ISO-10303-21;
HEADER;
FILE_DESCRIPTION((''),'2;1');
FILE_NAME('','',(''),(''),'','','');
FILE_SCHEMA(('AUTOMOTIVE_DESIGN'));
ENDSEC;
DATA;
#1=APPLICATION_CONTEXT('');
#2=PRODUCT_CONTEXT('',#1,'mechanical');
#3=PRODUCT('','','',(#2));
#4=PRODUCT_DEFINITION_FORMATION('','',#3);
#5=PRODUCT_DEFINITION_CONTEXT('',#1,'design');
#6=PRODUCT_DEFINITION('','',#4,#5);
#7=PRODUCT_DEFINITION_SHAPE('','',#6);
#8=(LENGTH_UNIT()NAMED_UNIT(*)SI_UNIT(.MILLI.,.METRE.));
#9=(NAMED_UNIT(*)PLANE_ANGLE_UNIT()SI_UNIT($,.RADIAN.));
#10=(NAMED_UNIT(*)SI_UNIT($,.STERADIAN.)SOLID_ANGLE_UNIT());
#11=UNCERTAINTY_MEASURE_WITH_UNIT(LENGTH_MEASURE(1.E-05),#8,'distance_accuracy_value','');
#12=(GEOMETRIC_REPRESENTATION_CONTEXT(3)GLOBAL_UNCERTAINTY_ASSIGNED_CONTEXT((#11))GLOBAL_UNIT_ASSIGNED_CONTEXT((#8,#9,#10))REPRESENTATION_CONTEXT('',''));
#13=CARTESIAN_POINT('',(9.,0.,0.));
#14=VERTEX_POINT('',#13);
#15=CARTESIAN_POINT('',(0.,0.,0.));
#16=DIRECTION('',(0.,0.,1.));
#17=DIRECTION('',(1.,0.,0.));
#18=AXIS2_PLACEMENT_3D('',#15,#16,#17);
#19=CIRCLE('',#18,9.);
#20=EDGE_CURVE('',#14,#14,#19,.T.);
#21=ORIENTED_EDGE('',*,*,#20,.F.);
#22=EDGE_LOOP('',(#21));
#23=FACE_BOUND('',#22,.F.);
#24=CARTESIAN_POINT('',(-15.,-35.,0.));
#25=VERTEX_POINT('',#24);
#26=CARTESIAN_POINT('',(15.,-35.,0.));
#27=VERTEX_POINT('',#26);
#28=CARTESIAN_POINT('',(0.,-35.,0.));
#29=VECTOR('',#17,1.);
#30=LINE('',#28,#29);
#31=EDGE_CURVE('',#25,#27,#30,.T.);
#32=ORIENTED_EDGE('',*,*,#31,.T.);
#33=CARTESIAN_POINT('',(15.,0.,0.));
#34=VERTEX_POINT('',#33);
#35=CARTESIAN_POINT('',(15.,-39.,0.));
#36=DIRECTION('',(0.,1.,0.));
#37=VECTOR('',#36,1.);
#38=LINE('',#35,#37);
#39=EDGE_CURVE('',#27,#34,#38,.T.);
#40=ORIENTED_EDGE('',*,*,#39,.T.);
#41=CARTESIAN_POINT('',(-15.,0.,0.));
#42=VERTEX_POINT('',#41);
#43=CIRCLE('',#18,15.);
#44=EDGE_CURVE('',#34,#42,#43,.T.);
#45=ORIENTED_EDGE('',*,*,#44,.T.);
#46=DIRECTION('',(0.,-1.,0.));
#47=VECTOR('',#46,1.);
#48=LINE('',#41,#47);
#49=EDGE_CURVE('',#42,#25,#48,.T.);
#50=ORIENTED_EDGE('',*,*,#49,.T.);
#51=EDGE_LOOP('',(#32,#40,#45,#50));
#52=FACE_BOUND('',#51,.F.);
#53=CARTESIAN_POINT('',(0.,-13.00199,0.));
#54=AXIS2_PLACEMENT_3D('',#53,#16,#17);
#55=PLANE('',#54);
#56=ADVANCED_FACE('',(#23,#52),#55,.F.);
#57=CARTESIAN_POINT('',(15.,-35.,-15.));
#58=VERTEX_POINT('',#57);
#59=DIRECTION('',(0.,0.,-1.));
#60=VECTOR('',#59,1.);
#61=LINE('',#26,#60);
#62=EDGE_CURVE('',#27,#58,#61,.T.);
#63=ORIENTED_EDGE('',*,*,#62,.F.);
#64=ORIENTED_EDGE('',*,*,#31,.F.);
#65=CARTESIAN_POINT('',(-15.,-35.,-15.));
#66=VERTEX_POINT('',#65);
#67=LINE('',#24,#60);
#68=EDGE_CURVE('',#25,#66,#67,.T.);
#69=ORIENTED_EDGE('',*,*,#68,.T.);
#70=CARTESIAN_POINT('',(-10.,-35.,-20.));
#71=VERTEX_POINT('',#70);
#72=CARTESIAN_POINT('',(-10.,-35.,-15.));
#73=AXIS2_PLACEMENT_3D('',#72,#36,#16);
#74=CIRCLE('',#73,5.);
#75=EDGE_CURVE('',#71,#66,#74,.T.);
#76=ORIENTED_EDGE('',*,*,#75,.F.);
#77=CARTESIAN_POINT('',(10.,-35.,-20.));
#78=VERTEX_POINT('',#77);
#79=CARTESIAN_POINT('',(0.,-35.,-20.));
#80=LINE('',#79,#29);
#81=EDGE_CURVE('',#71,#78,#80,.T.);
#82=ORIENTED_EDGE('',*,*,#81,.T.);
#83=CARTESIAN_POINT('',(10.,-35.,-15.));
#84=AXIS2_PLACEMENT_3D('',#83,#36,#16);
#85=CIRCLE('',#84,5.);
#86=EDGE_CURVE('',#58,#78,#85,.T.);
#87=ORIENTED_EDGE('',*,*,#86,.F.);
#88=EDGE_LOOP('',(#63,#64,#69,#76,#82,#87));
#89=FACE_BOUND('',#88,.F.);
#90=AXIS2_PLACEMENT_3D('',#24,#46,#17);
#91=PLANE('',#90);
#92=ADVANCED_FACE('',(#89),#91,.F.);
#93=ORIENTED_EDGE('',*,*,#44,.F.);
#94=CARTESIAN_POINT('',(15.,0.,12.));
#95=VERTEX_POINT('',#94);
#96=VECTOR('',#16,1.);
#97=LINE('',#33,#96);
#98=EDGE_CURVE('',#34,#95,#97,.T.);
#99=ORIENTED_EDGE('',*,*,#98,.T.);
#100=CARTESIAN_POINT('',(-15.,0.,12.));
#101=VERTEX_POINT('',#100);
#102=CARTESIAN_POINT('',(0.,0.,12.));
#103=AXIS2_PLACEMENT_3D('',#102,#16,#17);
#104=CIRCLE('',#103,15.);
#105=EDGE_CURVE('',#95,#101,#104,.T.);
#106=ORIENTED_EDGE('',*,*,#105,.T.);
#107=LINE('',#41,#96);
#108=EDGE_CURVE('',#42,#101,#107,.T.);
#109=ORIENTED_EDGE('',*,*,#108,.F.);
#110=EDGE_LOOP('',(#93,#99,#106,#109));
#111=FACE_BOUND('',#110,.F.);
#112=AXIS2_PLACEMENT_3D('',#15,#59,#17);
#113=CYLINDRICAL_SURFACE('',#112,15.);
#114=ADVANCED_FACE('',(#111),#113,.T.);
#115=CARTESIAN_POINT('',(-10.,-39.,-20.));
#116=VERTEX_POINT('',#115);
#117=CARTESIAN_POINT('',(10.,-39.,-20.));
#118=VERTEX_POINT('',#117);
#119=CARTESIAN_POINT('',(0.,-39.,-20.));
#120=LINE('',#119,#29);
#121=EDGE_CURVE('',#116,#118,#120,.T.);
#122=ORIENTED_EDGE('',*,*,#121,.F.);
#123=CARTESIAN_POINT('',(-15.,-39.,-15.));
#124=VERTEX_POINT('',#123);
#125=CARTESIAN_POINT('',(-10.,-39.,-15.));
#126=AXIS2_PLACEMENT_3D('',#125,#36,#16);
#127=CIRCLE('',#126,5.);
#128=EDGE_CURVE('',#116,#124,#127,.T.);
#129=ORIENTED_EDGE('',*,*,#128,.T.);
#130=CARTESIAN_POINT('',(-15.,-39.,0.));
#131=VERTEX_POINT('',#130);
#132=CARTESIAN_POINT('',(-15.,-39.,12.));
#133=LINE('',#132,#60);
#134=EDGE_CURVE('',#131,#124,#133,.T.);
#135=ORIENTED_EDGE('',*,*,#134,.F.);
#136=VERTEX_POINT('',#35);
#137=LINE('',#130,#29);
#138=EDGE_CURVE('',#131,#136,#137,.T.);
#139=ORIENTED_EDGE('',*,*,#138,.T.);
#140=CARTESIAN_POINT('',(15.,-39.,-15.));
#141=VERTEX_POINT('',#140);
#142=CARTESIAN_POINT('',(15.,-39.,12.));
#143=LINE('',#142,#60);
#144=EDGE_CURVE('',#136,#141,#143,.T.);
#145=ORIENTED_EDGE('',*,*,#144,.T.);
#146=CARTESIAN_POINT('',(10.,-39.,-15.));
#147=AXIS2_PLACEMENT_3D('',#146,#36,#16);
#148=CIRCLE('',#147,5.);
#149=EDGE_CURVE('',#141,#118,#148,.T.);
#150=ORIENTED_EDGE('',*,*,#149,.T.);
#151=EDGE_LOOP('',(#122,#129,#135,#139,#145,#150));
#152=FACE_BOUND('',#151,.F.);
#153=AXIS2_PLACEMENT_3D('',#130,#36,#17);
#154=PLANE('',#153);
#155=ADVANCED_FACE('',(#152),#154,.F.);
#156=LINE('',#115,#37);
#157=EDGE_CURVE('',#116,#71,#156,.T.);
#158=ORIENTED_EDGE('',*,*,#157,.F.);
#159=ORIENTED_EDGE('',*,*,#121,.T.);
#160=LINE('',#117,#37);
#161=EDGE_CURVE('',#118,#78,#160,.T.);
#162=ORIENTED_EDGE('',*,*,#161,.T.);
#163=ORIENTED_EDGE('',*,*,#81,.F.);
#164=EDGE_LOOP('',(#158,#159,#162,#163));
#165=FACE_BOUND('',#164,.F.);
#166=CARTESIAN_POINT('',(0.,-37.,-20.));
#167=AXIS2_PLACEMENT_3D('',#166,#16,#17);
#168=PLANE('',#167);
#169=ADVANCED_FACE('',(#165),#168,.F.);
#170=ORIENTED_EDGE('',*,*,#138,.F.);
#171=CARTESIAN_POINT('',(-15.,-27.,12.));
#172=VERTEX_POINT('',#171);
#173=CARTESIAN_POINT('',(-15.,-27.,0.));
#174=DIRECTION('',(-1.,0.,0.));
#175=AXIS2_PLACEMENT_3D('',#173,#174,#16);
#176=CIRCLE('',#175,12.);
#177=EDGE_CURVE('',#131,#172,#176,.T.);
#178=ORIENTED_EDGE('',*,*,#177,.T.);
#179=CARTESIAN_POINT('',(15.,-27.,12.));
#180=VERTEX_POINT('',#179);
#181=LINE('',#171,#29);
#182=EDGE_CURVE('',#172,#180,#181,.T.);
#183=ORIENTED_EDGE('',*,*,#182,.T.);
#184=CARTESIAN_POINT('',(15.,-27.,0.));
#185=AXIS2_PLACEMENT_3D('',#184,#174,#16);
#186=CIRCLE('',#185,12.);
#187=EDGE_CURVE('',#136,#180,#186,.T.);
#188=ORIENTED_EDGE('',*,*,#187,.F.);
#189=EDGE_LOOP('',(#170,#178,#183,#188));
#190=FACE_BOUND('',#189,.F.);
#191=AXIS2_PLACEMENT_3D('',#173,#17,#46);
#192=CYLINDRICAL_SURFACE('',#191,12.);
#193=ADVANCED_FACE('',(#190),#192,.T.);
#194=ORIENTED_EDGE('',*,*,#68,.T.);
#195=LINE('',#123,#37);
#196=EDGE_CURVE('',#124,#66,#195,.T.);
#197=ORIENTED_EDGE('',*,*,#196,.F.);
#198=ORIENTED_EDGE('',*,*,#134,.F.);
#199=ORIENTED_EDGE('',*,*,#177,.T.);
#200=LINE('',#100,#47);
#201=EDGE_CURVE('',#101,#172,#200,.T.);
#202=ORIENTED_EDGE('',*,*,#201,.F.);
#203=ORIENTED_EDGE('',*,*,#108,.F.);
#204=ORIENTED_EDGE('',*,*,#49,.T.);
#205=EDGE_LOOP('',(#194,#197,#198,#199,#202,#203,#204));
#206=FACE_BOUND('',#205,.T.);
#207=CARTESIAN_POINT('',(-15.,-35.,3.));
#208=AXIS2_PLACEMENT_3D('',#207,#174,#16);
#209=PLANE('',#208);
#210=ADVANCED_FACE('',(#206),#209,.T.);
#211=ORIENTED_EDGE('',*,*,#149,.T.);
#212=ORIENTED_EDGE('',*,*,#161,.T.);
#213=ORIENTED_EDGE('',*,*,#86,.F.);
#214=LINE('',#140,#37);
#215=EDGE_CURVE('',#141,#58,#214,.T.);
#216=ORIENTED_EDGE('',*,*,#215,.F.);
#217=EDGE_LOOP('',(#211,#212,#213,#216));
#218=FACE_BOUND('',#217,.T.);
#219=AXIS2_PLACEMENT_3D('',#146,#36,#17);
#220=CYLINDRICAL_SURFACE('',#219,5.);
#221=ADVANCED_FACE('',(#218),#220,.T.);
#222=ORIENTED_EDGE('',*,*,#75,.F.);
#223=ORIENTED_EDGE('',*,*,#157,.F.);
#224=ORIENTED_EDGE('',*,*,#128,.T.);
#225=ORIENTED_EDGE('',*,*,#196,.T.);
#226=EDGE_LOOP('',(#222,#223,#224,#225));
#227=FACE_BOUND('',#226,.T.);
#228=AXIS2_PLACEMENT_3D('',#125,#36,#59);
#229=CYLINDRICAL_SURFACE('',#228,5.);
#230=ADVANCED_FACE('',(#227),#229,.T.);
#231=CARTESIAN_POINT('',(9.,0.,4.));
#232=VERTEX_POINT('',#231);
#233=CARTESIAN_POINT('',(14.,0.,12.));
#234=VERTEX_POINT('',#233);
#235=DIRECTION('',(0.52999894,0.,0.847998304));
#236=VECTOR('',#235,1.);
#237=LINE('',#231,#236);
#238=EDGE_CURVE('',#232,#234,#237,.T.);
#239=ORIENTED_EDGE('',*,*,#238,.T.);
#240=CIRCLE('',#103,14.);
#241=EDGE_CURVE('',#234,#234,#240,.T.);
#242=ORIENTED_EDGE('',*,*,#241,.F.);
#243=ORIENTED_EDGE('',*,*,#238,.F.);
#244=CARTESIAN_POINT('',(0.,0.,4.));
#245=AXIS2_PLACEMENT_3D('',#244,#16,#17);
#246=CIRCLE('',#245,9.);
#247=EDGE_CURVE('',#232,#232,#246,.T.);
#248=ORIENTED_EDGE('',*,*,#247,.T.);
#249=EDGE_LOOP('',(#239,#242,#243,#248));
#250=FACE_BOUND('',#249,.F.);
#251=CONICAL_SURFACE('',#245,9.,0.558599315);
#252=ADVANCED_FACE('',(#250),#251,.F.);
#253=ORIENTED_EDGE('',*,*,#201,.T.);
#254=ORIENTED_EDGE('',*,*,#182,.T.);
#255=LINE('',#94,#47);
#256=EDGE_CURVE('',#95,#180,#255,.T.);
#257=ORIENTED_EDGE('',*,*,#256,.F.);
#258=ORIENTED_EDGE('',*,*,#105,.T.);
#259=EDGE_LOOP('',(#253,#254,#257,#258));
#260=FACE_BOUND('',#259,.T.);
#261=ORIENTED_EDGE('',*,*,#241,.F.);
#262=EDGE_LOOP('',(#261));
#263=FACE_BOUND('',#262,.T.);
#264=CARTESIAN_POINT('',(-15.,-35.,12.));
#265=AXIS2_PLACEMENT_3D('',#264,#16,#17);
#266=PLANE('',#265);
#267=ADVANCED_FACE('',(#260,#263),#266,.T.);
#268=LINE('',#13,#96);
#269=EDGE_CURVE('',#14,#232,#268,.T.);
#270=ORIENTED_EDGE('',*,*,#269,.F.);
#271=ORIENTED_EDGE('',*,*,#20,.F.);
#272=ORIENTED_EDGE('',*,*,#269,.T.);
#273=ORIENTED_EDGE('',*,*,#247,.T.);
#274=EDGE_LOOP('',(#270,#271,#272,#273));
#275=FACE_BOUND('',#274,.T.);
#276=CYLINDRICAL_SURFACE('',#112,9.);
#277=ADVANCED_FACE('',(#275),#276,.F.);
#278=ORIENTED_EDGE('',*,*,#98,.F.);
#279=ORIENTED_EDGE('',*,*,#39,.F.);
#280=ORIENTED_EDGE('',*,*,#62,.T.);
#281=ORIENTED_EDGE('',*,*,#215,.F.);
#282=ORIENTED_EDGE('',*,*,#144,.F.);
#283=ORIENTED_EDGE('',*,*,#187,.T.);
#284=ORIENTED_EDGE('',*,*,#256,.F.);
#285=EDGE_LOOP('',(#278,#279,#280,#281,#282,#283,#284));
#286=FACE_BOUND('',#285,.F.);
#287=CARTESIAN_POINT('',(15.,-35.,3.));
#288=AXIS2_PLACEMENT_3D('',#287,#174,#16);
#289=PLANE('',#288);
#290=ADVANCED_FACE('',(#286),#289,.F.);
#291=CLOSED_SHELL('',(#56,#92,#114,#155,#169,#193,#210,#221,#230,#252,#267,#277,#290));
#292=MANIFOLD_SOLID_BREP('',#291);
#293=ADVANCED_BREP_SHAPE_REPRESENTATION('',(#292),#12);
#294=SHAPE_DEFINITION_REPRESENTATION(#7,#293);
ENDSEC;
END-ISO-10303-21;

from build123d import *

# Parameters (mm, degrees)
F0_R     = 12
F0_W     = 30
F0_H     = 4
F0_R_2   = 9
F1_DEPTH = 3
F2_DEPTH = 20
F3_DEPTH = 6
F4_SIZE  = 2.99999
F6_DEPTH = 12
F7_SIZE2 = 5
F7_SIZE  = 8
F8_DEPTH = 4
F9_R     = 12
F10_R    = 5


# Not quite as in the source:
# - a fillet or chamfer is up to 0.001 mm smaller than in the source, because OpenCascade refuses the exact size


with BuildPart() as f1:
    # F0 (on Top) → F1 (new body)
    with BuildSketch(Plane.XY):
        with BuildLine():
            Line((15, -35), (15, 0))
            ThreePointArc((15, 0), (0, 15), (-15, 0))
            Line((-15, 0), (-15, -35))
            Line((-15, -35), (15, -35))
        make_face()
        Circle(F0_R, mode=Mode.SUBTRACT)
        with Locations((0, -37)):
            Rectangle(F0_W, F0_H)
        Circle(F0_R)
        Circle(F0_R_2, mode=Mode.SUBTRACT)
    extrude(amount=F1_DEPTH)

    # F0 (on Top) → F2 (join)
    with BuildSketch(Plane.XY):
        with Locations((0, -37)):
            Rectangle(F0_W, F0_H)
    extrude(amount=-F2_DEPTH)

    # F0 (on Top) → F3 (join)
    with BuildSketch(Plane.XY):
        Circle(F0_R)
        Circle(F0_R_2, mode=Mode.SUBTRACT)
    extrude(amount=F3_DEPTH)

    # F4 (size 3 in the source; OpenCascade refuses exactly that, so slightly less here)
    f4_edges = [f1.edges().sort_by_distance(p)[0] for p in [
        (-12, 0, 3),
    ]]
    chamfer(f4_edges, length=F4_SIZE)

    # F0 (on Top) → F6 (join)
    with BuildSketch(Plane.XY):
        with BuildLine():
            Line((15, -35), (15, 0))
            ThreePointArc((15, 0), (0, 15), (-15, 0))
            Line((-15, 0), (-15, -35))
            Line((-15, -35), (15, -35))
        make_face()
        Circle(F0_R, mode=Mode.SUBTRACT)
        Circle(F0_R)
        Circle(F0_R_2, mode=Mode.SUBTRACT)
    extrude(amount=F6_DEPTH)

    # F7
    f7_edges = [f1.edges().sort_by_distance(p)[0] for p in [
        (-9, 0, 12),
    ]]
    f7_side = f1.faces().sort_by_distance((-9, 0, 6))[0]
    chamfer(f7_edges, length=F7_SIZE, length2=F7_SIZE2, reference=f7_side)

    # F8 (add, through all): a face of the model
    f8_faces = [f1.faces().sort_by_distance(p)[0] for p in [
        (0, -35, 7.5),
    ]]
    extrude(f8_faces, amount=F8_DEPTH)

    # F9
    f9_edges = [f1.edges().sort_by_distance(p)[0] for p in [
        (0, -39, 12),
    ]]
    fillet(f9_edges, radius=F9_R)

    # F10
    f10_edges = [f1.edges().sort_by_distance(p)[0] for p in [
        (-15, -37, -20),
        (15, -37, -20),
    ]]
    fillet(f10_edges, radius=F10_R)


solid = f1.part
